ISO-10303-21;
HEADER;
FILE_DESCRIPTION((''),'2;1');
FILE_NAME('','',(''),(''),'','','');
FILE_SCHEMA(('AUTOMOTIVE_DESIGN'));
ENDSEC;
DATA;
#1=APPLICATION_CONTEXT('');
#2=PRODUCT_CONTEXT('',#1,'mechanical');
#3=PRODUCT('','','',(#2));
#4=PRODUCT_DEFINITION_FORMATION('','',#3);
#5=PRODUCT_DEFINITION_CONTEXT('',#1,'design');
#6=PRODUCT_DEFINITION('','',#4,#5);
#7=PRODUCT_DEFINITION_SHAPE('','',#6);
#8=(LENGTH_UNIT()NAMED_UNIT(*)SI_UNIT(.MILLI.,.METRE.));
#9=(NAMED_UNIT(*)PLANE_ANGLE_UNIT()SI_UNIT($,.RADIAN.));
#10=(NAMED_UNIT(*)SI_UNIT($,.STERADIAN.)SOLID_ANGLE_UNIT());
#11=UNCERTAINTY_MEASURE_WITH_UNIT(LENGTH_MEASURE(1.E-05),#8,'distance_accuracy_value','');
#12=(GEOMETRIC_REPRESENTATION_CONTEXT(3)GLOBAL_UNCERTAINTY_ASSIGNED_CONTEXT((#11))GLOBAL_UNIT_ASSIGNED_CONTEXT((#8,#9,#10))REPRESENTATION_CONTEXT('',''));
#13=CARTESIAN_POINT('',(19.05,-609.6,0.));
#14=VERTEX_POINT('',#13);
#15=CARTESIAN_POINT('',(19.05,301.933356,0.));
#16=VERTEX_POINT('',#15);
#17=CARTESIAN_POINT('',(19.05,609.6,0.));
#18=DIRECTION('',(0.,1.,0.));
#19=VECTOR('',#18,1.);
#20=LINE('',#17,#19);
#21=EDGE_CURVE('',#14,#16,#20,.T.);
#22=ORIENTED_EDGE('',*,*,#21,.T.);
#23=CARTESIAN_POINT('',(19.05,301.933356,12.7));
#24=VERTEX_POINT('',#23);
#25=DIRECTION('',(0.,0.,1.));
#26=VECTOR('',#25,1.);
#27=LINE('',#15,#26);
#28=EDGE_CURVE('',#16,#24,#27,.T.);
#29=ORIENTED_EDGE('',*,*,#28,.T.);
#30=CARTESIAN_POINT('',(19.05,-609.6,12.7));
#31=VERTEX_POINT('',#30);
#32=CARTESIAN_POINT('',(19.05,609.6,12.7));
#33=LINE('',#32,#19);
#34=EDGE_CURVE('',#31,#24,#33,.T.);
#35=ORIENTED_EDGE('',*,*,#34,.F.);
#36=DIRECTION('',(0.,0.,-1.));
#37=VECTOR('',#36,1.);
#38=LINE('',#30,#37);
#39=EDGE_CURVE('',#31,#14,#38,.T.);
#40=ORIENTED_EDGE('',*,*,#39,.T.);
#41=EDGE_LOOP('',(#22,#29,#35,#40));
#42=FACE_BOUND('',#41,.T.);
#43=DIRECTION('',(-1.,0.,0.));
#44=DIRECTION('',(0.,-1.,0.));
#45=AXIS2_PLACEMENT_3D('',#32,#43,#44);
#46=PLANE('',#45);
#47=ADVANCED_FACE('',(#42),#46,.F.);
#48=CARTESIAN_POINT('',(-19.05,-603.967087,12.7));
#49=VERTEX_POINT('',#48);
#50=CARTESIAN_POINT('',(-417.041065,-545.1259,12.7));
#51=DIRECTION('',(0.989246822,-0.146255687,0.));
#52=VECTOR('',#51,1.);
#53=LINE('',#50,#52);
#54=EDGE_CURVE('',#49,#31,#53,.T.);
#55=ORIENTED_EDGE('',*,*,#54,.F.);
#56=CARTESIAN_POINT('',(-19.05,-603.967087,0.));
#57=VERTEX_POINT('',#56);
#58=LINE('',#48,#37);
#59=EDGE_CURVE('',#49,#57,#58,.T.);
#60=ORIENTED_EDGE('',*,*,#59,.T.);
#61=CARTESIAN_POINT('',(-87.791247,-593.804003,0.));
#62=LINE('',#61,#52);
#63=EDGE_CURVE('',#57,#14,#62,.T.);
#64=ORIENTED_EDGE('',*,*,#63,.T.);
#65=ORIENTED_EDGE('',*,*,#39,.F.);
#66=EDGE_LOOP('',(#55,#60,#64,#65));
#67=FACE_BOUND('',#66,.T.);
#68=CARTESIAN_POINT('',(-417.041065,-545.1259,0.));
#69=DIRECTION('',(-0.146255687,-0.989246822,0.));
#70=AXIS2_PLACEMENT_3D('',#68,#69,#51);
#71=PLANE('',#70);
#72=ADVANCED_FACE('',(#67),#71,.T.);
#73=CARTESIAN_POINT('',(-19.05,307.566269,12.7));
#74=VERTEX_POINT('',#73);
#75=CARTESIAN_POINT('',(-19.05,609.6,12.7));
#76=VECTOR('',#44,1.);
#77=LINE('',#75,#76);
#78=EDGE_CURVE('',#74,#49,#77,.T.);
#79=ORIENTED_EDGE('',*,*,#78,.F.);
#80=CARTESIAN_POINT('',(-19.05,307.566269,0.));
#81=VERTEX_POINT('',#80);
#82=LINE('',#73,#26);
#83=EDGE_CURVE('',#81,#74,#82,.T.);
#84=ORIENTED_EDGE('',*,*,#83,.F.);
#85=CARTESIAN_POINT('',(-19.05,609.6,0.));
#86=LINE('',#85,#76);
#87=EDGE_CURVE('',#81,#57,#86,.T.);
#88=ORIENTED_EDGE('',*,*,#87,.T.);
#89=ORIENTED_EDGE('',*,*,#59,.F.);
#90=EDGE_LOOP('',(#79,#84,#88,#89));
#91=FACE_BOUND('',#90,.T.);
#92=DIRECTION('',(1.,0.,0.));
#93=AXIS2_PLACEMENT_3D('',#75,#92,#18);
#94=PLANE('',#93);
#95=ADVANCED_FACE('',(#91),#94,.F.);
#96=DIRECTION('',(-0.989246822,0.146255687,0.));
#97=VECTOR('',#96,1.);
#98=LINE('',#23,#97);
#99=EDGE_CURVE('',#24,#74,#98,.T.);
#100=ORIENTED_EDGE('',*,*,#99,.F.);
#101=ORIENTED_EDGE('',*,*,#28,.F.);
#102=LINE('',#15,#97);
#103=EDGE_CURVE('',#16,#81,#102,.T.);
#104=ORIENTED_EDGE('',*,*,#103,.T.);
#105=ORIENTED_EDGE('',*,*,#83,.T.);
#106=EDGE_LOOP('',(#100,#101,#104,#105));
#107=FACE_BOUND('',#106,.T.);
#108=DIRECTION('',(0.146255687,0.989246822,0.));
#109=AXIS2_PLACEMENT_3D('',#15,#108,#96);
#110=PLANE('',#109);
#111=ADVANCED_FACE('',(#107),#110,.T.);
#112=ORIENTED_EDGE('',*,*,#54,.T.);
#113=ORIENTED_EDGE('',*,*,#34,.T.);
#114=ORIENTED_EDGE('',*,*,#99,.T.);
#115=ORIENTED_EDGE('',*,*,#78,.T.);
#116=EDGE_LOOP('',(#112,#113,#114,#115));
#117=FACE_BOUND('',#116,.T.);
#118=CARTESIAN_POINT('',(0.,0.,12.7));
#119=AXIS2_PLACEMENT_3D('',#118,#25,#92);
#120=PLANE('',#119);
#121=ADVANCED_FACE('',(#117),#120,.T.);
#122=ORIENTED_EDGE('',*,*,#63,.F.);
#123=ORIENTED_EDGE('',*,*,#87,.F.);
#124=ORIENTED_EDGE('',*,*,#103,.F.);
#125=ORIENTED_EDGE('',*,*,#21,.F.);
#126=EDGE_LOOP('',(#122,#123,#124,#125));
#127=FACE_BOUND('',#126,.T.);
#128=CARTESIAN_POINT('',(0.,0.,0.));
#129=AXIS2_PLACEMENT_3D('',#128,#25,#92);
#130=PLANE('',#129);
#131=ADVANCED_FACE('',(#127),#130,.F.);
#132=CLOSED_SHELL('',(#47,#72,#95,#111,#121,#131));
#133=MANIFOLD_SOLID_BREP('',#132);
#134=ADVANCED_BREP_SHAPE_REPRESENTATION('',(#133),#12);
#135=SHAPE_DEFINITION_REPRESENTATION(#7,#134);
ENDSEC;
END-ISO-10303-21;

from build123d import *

# Parameters (mm, degrees)
ESQUISSE1_W             = 38.1
ESQUISSE1_H             = 1219.2
BOSS_EXTRU_1_DEPTH      = 12.7
ENL_V_START             = -12.7
ENL_V_MAT_EXTRU_1_DEPTH = 12.7


# Read off the part's stored shape, not the designer's step: Enlèv. mat.-Extru.1
with BuildPart() as part:
    # Esquisse1 → Boss.-Extru.1 (new body)
    with BuildSketch(Plane.XY):
        Rectangle(ESQUISSE1_W, ESQUISSE1_H)
    extrude(amount=BOSS_EXTRU_1_DEPTH)

    # Enlèv. mat.-Extru.1 outline → Enlèv. mat.-Extru.1 (cut)
    with BuildSketch(Plane.XY.offset(12.7).offset(ENL_V_START)):
        Polygon((-19.05, 307.566269395), (19.05, 301.933356), (19.05, 609.6), (-19.05, 609.6), align=None)
        Polygon((-19.05, -609.6), (19.05, -609.6), (-19.05, -603.967086605), align=None)
    extrude(amount=ENL_V_MAT_EXTRU_1_DEPTH, mode=Mode.SUBTRACT)


solid = part.part
